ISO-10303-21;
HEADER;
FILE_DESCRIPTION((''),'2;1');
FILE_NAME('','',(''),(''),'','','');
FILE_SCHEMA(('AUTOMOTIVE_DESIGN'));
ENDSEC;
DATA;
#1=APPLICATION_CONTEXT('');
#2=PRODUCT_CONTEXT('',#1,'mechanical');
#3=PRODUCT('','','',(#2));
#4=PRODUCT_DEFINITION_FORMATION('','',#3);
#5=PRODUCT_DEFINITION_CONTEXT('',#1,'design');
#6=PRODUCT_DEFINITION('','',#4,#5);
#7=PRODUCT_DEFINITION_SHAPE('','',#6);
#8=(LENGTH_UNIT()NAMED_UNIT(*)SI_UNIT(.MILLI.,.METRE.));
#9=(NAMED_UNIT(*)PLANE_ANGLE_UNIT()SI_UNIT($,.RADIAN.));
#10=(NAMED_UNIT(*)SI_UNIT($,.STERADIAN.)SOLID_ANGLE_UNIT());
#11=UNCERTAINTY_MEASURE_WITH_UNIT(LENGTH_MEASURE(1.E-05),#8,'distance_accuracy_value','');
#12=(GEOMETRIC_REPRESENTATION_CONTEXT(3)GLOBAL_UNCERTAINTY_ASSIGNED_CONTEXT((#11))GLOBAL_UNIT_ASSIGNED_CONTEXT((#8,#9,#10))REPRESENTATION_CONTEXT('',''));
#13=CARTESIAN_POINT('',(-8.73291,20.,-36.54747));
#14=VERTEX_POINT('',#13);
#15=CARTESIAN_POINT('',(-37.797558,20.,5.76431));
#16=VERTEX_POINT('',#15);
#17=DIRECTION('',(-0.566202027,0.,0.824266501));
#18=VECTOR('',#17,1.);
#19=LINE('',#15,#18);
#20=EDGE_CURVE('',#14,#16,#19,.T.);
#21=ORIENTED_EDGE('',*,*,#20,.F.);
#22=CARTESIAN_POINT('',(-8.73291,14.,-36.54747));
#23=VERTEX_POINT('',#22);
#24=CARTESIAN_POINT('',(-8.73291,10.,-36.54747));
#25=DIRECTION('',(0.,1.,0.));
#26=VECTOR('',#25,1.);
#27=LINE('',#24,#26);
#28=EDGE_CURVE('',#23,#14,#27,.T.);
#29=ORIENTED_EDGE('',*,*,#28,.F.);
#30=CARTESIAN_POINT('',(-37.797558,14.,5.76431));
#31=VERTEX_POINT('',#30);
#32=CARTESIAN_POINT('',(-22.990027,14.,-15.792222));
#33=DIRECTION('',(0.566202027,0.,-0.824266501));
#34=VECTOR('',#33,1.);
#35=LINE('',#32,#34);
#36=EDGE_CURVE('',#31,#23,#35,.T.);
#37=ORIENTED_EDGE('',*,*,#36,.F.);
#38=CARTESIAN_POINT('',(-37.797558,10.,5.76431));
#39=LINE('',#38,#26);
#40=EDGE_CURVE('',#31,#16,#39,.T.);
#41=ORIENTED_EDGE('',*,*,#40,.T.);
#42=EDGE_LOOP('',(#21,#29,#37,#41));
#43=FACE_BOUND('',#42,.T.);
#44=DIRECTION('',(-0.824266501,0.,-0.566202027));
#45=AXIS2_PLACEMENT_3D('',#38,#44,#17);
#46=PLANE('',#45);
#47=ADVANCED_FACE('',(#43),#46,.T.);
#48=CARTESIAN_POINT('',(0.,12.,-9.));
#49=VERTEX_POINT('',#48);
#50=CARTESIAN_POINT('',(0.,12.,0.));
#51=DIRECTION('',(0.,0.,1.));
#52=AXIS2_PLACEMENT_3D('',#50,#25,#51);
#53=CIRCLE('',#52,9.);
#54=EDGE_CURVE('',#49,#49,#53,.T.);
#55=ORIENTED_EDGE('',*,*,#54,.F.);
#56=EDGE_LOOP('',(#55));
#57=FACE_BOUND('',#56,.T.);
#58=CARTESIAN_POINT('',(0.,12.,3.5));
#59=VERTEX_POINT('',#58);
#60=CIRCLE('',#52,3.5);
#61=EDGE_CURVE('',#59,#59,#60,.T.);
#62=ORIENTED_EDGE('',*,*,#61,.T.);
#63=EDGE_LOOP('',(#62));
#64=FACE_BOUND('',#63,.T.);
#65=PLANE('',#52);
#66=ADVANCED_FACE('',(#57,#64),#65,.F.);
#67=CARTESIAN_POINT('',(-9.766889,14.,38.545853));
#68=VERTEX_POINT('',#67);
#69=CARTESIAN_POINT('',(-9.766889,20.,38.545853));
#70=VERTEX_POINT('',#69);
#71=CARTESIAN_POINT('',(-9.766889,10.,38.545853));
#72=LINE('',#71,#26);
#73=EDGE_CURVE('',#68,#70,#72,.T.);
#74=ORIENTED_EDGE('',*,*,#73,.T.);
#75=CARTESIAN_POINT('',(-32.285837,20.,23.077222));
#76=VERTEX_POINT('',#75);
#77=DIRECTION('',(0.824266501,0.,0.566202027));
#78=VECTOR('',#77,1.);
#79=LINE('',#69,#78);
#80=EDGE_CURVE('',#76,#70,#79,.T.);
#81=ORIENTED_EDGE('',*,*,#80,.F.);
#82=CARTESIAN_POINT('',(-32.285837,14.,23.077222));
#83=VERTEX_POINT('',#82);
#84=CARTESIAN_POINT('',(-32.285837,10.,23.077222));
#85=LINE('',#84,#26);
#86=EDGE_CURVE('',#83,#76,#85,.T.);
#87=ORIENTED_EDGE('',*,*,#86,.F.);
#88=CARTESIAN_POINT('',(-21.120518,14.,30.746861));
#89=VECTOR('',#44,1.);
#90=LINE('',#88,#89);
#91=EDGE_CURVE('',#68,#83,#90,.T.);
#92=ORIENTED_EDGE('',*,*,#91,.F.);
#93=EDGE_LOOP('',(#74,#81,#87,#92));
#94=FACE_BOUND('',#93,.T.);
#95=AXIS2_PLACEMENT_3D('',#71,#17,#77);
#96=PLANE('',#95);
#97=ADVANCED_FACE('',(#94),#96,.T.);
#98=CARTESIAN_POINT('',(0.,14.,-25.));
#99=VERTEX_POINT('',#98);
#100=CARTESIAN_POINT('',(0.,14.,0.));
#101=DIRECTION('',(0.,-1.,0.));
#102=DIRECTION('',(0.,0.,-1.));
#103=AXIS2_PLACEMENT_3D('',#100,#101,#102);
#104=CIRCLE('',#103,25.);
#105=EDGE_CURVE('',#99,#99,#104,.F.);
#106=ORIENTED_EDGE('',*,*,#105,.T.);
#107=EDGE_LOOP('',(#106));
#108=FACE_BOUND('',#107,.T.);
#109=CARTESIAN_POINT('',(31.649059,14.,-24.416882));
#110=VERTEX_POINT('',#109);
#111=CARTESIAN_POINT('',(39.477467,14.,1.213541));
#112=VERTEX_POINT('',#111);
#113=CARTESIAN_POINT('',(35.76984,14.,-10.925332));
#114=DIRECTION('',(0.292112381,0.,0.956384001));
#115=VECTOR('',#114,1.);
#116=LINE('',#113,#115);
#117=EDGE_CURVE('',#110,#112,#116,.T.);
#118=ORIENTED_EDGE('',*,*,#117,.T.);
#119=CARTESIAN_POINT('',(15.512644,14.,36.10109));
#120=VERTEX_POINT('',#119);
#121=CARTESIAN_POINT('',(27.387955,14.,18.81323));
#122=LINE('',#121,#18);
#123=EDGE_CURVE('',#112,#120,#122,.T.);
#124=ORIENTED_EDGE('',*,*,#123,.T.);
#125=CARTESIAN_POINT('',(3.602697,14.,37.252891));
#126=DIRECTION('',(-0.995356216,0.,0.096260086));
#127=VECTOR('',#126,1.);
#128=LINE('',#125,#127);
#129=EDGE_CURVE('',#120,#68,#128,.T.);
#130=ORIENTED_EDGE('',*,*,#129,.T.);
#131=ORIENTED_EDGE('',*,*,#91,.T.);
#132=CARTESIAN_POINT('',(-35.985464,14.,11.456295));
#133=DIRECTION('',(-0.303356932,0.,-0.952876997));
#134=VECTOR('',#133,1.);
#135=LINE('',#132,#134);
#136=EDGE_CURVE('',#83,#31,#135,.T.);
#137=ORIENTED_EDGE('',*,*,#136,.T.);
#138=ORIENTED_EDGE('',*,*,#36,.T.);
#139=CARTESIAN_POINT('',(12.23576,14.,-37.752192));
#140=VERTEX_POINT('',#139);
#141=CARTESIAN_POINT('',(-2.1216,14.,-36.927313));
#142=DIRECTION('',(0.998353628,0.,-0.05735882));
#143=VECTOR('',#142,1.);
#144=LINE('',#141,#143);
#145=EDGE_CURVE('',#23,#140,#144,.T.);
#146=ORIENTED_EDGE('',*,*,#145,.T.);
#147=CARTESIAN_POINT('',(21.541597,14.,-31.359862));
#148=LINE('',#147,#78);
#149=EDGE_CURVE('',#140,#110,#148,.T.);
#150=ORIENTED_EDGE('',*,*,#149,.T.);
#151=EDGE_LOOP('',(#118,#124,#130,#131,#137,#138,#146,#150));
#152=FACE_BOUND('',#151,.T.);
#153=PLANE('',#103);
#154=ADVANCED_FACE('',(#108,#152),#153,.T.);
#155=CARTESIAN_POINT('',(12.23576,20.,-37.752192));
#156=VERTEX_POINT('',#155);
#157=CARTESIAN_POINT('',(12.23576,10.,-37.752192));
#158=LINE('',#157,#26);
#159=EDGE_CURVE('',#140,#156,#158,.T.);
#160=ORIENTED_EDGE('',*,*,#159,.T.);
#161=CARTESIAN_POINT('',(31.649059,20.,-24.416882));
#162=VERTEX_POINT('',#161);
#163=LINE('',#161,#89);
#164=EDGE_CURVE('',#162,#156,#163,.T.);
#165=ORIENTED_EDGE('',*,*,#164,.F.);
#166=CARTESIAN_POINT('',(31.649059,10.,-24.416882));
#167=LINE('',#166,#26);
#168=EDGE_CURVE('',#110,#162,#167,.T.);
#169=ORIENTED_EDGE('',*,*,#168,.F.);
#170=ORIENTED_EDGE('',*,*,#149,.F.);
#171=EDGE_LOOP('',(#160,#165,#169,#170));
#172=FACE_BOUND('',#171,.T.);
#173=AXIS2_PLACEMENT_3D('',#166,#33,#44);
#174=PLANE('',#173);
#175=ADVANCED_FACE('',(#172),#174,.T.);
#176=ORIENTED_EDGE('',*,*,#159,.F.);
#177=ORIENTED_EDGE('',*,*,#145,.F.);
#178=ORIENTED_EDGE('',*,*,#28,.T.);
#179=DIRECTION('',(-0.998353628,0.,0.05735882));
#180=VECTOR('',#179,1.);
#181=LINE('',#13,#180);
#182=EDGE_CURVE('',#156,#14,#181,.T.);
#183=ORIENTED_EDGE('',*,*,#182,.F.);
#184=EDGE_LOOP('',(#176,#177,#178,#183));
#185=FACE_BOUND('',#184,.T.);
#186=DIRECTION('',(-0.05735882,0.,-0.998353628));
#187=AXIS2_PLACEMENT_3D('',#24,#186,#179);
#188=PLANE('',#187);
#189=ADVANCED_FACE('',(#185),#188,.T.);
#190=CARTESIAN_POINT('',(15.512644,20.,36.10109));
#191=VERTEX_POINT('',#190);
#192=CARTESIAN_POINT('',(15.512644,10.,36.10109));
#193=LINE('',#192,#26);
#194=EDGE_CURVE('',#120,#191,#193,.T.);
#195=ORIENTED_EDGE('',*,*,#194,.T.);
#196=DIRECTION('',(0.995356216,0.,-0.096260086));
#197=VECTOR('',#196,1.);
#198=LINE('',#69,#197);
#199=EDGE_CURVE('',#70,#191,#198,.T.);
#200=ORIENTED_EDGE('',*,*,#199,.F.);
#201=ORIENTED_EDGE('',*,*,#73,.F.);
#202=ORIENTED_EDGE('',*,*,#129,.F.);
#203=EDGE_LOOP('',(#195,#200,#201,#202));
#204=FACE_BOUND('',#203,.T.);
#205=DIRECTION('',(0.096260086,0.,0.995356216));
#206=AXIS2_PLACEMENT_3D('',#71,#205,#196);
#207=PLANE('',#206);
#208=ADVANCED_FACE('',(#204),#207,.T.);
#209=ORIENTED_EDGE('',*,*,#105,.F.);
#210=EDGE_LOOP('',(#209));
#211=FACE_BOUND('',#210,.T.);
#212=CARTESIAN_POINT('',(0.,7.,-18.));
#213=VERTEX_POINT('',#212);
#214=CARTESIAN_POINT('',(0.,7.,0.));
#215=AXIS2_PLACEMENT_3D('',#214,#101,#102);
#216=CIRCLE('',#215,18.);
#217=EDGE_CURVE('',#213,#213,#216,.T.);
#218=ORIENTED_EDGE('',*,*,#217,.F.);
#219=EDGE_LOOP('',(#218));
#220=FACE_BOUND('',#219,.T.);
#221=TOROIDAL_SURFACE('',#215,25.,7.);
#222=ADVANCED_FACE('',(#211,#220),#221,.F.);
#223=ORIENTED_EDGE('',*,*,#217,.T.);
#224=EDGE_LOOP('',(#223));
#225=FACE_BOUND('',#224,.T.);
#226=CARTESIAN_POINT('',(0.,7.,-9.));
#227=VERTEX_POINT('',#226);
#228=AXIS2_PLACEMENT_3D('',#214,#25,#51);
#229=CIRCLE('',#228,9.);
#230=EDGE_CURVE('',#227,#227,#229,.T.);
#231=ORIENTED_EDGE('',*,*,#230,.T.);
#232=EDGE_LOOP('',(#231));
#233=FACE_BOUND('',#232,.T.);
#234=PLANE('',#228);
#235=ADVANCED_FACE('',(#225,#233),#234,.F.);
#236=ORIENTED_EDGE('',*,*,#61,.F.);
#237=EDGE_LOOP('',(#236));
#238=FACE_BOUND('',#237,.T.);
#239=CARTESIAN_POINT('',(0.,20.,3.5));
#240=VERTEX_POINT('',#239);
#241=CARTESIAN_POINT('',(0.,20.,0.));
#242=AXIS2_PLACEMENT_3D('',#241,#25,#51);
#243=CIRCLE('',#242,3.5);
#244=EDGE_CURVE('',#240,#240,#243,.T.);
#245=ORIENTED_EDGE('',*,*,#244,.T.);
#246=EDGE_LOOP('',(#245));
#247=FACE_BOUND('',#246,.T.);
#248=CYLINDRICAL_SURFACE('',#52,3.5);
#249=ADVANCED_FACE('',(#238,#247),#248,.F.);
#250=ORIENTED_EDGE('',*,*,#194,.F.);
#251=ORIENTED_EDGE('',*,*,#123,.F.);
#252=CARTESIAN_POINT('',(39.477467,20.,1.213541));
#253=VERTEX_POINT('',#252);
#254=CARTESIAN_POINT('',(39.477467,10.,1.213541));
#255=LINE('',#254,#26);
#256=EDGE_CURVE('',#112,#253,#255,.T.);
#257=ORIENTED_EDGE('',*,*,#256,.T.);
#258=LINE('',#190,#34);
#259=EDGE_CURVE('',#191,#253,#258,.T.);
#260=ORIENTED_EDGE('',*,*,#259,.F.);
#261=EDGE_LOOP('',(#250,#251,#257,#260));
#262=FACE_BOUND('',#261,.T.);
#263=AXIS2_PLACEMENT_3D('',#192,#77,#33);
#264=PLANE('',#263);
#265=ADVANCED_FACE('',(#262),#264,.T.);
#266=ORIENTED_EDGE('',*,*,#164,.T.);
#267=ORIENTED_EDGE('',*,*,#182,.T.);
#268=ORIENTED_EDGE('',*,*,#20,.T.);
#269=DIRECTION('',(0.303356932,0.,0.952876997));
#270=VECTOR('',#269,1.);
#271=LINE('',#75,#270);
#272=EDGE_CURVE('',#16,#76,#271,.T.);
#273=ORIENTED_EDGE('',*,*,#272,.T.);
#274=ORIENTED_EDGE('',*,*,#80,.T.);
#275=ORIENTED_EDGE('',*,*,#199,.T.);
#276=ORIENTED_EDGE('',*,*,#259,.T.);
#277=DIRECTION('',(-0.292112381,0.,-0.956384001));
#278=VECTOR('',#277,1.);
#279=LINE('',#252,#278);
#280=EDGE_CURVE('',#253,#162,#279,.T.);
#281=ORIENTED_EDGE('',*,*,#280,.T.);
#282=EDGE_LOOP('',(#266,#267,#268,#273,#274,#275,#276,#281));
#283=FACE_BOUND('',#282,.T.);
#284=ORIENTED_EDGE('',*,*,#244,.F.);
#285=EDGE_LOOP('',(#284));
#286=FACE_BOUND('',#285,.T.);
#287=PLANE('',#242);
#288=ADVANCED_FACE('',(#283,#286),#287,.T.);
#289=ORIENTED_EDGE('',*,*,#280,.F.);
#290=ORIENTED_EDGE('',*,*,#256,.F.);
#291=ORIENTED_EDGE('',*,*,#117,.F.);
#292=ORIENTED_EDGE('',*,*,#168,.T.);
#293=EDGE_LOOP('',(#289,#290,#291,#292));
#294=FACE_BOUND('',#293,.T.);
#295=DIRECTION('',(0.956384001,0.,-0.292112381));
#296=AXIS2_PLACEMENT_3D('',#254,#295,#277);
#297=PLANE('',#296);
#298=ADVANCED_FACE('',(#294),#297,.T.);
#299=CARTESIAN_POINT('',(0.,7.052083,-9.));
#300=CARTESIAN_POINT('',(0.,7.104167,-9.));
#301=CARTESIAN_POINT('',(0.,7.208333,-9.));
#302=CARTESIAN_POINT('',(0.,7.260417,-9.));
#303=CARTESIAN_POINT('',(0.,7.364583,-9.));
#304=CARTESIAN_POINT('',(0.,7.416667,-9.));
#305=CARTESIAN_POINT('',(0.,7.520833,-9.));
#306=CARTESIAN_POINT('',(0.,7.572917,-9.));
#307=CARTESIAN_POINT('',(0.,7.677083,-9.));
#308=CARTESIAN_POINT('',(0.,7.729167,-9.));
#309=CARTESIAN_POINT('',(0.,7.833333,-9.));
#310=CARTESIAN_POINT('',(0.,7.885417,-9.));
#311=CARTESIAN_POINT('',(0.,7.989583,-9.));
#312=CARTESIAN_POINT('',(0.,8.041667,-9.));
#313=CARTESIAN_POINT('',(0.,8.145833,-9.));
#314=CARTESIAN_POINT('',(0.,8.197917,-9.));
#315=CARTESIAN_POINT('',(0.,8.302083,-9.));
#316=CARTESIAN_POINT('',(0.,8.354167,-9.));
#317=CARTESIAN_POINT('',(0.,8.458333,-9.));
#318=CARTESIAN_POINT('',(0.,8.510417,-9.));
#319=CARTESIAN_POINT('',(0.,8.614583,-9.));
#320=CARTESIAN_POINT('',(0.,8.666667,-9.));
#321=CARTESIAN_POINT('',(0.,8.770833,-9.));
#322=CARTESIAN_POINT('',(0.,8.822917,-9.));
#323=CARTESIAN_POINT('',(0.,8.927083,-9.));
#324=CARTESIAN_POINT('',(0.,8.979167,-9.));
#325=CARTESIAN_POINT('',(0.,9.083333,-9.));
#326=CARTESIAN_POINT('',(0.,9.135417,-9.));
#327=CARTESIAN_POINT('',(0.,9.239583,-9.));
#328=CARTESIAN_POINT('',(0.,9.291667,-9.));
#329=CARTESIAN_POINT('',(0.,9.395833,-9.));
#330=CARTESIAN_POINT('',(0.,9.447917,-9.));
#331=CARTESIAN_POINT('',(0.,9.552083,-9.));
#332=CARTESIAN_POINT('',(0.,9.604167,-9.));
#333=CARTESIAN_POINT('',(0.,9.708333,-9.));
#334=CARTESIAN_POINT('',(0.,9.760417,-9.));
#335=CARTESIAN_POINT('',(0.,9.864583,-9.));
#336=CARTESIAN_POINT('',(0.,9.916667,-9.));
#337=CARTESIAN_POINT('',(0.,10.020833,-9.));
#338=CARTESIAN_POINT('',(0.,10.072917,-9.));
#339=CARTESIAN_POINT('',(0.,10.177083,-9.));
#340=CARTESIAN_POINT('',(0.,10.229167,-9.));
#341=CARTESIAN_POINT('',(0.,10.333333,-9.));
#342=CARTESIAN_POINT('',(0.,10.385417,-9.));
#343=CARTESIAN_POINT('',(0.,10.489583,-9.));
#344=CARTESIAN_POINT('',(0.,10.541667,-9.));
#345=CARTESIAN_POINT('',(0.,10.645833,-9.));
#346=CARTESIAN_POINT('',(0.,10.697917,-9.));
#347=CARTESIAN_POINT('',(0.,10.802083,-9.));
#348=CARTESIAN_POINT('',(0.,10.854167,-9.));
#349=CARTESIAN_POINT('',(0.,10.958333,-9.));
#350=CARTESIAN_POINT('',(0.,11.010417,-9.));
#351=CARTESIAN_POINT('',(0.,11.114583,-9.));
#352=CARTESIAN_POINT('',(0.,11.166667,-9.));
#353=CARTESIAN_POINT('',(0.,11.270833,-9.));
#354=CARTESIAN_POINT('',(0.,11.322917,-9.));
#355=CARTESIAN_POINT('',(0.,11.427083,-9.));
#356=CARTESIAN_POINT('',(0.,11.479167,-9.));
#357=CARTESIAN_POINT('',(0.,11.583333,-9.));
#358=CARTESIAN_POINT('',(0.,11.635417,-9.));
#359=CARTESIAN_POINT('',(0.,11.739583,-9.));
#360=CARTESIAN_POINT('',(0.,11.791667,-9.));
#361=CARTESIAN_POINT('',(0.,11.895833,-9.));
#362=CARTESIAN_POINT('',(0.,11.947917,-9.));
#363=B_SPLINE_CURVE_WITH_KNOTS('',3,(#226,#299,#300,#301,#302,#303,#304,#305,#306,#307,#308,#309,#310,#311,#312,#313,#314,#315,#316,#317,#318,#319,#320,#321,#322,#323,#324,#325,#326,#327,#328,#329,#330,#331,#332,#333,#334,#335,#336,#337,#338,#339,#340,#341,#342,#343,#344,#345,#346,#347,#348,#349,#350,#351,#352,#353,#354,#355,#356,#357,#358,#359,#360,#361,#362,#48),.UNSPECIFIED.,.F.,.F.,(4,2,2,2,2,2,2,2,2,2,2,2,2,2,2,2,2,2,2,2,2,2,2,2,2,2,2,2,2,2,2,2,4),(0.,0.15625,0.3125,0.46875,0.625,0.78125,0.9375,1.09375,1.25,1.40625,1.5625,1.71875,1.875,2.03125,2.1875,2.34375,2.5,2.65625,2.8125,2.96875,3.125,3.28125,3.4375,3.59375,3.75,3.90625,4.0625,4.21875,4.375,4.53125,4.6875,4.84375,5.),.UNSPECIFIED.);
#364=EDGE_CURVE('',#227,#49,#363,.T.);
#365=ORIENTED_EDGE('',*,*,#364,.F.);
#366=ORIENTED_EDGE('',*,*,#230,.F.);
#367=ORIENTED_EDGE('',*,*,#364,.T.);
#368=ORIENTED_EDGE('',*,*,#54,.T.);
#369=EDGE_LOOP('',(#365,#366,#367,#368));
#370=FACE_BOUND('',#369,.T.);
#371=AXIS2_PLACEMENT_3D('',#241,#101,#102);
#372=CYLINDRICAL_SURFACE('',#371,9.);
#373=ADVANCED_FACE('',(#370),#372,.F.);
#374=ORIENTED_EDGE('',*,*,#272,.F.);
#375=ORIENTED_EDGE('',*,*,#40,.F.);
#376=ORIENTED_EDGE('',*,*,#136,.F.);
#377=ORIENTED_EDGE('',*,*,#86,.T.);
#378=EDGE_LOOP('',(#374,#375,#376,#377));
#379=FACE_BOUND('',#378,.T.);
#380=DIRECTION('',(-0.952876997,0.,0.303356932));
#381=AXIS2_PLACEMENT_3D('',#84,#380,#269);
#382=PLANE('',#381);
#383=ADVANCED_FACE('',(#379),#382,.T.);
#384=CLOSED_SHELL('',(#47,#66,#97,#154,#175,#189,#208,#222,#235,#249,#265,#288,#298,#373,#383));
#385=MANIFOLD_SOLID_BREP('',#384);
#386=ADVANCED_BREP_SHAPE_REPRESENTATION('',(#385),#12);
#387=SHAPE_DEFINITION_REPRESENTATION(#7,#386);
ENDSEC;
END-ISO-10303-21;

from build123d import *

# Parameters (mm, degrees)
EXTRUDE_START         = 7
SKETCH_1_R            = 40
SKETCH_1_R_2          = 9
EXTRUDE_1_DEPTH       = 13
SKETCH_12_R           = 43.016285751
SKETCH_12_R_2         = 18
CUT_EXTRUDE_5_DEPTH   = 7
CUT_EXTRUDE_5_2_DEPTH = 10
EXTRUDE_START_2       = -8
SKETCH_17_R           = 9
SKETCH_17_R_2         = 3.5
EXTRUDE_6_DEPTH       = 8
FILLET_1_R            = 7


with BuildPart() as part:
    # Эскиз1 → Вытянуть1 (new body)
    with BuildSketch(Plane(origin=(0, 0, 0), x_dir=(1, 0, 0), z_dir=(0, 1, 0)).offset(EXTRUDE_START)):
        with Locations(Location((0, 0, 0), (0, 0, 90))):
            Circle(SKETCH_1_R)
        with Locations(Location((0, 0, 0), (0, 0, 90))):
            Circle(SKETCH_1_R_2, mode=Mode.SUBTRACT)
    extrude(amount=EXTRUDE_1_DEPTH)

    # Эскиз12 → Cut-Extrude 5 (cut)
    with BuildSketch(Plane.XZ.offset(-7)):
        Circle(SKETCH_12_R)
        with Locations(Location((0, 0, 0), (0, 0, 270))):
            Circle(SKETCH_12_R_2, mode=Mode.SUBTRACT)
    extrude(amount=-CUT_EXTRUDE_5_DEPTH, mode=Mode.SUBTRACT)

    # Эскиз16 → Cut-Extrude 5 2 (cut)
    with BuildSketch(Plane(origin=(0, 20, 0), x_dir=(1, 0, 0), z_dir=(0, 1, 0))):
        Polygon((-7.191454283, -44.519977242), (-37.881198424, -24.469576927), (-45.366952085, 5.371359597), (-23.143023154, 39.387971833), (7.640311576, 44.595915214), (37.770432201, 24.911131357), (46.151265064, -5.857681321), (23.11557492, -39.392615521), align=None)
        Polygon((-8.732909884, 36.547470459), (12.235760297, 37.752192063), (31.649059452, 24.416882045), (39.477467189, -1.213541002), (15.512644169, -36.101089761), (-9.76688891, -38.545852744), (-32.285837438, -23.077221806), (-37.797558071, -5.764310018), align=None, mode=Mode.SUBTRACT)
    extrude(amount=-CUT_EXTRUDE_5_2_DEPTH, mode=Mode.SUBTRACT)

    # Эскиз17 → Вытянуть6 (add)
    with BuildSketch(Plane(origin=(0, 20, 0), x_dir=(1, 0, 0), z_dir=(0, 1, 0)).offset(EXTRUDE_START_2)):
        with Locations(Location((0, 0, 0), (0, 0, 90))):
            Circle(SKETCH_17_R)
        with Locations(Location((0, 0, 0), (0, 0, 270))):
            Circle(SKETCH_17_R_2, mode=Mode.SUBTRACT)
    extrude(amount=EXTRUDE_6_DEPTH)

    # Скругление1
    fillet_1_edges = [part.edges().sort_by_distance(p)[0] for p in [
        (0, 14, 18),
    ]]
    fillet(fillet_1_edges, radius=FILLET_1_R - 0.0001)  # a hair under: the kernel refuses the full size


solid = part.part
